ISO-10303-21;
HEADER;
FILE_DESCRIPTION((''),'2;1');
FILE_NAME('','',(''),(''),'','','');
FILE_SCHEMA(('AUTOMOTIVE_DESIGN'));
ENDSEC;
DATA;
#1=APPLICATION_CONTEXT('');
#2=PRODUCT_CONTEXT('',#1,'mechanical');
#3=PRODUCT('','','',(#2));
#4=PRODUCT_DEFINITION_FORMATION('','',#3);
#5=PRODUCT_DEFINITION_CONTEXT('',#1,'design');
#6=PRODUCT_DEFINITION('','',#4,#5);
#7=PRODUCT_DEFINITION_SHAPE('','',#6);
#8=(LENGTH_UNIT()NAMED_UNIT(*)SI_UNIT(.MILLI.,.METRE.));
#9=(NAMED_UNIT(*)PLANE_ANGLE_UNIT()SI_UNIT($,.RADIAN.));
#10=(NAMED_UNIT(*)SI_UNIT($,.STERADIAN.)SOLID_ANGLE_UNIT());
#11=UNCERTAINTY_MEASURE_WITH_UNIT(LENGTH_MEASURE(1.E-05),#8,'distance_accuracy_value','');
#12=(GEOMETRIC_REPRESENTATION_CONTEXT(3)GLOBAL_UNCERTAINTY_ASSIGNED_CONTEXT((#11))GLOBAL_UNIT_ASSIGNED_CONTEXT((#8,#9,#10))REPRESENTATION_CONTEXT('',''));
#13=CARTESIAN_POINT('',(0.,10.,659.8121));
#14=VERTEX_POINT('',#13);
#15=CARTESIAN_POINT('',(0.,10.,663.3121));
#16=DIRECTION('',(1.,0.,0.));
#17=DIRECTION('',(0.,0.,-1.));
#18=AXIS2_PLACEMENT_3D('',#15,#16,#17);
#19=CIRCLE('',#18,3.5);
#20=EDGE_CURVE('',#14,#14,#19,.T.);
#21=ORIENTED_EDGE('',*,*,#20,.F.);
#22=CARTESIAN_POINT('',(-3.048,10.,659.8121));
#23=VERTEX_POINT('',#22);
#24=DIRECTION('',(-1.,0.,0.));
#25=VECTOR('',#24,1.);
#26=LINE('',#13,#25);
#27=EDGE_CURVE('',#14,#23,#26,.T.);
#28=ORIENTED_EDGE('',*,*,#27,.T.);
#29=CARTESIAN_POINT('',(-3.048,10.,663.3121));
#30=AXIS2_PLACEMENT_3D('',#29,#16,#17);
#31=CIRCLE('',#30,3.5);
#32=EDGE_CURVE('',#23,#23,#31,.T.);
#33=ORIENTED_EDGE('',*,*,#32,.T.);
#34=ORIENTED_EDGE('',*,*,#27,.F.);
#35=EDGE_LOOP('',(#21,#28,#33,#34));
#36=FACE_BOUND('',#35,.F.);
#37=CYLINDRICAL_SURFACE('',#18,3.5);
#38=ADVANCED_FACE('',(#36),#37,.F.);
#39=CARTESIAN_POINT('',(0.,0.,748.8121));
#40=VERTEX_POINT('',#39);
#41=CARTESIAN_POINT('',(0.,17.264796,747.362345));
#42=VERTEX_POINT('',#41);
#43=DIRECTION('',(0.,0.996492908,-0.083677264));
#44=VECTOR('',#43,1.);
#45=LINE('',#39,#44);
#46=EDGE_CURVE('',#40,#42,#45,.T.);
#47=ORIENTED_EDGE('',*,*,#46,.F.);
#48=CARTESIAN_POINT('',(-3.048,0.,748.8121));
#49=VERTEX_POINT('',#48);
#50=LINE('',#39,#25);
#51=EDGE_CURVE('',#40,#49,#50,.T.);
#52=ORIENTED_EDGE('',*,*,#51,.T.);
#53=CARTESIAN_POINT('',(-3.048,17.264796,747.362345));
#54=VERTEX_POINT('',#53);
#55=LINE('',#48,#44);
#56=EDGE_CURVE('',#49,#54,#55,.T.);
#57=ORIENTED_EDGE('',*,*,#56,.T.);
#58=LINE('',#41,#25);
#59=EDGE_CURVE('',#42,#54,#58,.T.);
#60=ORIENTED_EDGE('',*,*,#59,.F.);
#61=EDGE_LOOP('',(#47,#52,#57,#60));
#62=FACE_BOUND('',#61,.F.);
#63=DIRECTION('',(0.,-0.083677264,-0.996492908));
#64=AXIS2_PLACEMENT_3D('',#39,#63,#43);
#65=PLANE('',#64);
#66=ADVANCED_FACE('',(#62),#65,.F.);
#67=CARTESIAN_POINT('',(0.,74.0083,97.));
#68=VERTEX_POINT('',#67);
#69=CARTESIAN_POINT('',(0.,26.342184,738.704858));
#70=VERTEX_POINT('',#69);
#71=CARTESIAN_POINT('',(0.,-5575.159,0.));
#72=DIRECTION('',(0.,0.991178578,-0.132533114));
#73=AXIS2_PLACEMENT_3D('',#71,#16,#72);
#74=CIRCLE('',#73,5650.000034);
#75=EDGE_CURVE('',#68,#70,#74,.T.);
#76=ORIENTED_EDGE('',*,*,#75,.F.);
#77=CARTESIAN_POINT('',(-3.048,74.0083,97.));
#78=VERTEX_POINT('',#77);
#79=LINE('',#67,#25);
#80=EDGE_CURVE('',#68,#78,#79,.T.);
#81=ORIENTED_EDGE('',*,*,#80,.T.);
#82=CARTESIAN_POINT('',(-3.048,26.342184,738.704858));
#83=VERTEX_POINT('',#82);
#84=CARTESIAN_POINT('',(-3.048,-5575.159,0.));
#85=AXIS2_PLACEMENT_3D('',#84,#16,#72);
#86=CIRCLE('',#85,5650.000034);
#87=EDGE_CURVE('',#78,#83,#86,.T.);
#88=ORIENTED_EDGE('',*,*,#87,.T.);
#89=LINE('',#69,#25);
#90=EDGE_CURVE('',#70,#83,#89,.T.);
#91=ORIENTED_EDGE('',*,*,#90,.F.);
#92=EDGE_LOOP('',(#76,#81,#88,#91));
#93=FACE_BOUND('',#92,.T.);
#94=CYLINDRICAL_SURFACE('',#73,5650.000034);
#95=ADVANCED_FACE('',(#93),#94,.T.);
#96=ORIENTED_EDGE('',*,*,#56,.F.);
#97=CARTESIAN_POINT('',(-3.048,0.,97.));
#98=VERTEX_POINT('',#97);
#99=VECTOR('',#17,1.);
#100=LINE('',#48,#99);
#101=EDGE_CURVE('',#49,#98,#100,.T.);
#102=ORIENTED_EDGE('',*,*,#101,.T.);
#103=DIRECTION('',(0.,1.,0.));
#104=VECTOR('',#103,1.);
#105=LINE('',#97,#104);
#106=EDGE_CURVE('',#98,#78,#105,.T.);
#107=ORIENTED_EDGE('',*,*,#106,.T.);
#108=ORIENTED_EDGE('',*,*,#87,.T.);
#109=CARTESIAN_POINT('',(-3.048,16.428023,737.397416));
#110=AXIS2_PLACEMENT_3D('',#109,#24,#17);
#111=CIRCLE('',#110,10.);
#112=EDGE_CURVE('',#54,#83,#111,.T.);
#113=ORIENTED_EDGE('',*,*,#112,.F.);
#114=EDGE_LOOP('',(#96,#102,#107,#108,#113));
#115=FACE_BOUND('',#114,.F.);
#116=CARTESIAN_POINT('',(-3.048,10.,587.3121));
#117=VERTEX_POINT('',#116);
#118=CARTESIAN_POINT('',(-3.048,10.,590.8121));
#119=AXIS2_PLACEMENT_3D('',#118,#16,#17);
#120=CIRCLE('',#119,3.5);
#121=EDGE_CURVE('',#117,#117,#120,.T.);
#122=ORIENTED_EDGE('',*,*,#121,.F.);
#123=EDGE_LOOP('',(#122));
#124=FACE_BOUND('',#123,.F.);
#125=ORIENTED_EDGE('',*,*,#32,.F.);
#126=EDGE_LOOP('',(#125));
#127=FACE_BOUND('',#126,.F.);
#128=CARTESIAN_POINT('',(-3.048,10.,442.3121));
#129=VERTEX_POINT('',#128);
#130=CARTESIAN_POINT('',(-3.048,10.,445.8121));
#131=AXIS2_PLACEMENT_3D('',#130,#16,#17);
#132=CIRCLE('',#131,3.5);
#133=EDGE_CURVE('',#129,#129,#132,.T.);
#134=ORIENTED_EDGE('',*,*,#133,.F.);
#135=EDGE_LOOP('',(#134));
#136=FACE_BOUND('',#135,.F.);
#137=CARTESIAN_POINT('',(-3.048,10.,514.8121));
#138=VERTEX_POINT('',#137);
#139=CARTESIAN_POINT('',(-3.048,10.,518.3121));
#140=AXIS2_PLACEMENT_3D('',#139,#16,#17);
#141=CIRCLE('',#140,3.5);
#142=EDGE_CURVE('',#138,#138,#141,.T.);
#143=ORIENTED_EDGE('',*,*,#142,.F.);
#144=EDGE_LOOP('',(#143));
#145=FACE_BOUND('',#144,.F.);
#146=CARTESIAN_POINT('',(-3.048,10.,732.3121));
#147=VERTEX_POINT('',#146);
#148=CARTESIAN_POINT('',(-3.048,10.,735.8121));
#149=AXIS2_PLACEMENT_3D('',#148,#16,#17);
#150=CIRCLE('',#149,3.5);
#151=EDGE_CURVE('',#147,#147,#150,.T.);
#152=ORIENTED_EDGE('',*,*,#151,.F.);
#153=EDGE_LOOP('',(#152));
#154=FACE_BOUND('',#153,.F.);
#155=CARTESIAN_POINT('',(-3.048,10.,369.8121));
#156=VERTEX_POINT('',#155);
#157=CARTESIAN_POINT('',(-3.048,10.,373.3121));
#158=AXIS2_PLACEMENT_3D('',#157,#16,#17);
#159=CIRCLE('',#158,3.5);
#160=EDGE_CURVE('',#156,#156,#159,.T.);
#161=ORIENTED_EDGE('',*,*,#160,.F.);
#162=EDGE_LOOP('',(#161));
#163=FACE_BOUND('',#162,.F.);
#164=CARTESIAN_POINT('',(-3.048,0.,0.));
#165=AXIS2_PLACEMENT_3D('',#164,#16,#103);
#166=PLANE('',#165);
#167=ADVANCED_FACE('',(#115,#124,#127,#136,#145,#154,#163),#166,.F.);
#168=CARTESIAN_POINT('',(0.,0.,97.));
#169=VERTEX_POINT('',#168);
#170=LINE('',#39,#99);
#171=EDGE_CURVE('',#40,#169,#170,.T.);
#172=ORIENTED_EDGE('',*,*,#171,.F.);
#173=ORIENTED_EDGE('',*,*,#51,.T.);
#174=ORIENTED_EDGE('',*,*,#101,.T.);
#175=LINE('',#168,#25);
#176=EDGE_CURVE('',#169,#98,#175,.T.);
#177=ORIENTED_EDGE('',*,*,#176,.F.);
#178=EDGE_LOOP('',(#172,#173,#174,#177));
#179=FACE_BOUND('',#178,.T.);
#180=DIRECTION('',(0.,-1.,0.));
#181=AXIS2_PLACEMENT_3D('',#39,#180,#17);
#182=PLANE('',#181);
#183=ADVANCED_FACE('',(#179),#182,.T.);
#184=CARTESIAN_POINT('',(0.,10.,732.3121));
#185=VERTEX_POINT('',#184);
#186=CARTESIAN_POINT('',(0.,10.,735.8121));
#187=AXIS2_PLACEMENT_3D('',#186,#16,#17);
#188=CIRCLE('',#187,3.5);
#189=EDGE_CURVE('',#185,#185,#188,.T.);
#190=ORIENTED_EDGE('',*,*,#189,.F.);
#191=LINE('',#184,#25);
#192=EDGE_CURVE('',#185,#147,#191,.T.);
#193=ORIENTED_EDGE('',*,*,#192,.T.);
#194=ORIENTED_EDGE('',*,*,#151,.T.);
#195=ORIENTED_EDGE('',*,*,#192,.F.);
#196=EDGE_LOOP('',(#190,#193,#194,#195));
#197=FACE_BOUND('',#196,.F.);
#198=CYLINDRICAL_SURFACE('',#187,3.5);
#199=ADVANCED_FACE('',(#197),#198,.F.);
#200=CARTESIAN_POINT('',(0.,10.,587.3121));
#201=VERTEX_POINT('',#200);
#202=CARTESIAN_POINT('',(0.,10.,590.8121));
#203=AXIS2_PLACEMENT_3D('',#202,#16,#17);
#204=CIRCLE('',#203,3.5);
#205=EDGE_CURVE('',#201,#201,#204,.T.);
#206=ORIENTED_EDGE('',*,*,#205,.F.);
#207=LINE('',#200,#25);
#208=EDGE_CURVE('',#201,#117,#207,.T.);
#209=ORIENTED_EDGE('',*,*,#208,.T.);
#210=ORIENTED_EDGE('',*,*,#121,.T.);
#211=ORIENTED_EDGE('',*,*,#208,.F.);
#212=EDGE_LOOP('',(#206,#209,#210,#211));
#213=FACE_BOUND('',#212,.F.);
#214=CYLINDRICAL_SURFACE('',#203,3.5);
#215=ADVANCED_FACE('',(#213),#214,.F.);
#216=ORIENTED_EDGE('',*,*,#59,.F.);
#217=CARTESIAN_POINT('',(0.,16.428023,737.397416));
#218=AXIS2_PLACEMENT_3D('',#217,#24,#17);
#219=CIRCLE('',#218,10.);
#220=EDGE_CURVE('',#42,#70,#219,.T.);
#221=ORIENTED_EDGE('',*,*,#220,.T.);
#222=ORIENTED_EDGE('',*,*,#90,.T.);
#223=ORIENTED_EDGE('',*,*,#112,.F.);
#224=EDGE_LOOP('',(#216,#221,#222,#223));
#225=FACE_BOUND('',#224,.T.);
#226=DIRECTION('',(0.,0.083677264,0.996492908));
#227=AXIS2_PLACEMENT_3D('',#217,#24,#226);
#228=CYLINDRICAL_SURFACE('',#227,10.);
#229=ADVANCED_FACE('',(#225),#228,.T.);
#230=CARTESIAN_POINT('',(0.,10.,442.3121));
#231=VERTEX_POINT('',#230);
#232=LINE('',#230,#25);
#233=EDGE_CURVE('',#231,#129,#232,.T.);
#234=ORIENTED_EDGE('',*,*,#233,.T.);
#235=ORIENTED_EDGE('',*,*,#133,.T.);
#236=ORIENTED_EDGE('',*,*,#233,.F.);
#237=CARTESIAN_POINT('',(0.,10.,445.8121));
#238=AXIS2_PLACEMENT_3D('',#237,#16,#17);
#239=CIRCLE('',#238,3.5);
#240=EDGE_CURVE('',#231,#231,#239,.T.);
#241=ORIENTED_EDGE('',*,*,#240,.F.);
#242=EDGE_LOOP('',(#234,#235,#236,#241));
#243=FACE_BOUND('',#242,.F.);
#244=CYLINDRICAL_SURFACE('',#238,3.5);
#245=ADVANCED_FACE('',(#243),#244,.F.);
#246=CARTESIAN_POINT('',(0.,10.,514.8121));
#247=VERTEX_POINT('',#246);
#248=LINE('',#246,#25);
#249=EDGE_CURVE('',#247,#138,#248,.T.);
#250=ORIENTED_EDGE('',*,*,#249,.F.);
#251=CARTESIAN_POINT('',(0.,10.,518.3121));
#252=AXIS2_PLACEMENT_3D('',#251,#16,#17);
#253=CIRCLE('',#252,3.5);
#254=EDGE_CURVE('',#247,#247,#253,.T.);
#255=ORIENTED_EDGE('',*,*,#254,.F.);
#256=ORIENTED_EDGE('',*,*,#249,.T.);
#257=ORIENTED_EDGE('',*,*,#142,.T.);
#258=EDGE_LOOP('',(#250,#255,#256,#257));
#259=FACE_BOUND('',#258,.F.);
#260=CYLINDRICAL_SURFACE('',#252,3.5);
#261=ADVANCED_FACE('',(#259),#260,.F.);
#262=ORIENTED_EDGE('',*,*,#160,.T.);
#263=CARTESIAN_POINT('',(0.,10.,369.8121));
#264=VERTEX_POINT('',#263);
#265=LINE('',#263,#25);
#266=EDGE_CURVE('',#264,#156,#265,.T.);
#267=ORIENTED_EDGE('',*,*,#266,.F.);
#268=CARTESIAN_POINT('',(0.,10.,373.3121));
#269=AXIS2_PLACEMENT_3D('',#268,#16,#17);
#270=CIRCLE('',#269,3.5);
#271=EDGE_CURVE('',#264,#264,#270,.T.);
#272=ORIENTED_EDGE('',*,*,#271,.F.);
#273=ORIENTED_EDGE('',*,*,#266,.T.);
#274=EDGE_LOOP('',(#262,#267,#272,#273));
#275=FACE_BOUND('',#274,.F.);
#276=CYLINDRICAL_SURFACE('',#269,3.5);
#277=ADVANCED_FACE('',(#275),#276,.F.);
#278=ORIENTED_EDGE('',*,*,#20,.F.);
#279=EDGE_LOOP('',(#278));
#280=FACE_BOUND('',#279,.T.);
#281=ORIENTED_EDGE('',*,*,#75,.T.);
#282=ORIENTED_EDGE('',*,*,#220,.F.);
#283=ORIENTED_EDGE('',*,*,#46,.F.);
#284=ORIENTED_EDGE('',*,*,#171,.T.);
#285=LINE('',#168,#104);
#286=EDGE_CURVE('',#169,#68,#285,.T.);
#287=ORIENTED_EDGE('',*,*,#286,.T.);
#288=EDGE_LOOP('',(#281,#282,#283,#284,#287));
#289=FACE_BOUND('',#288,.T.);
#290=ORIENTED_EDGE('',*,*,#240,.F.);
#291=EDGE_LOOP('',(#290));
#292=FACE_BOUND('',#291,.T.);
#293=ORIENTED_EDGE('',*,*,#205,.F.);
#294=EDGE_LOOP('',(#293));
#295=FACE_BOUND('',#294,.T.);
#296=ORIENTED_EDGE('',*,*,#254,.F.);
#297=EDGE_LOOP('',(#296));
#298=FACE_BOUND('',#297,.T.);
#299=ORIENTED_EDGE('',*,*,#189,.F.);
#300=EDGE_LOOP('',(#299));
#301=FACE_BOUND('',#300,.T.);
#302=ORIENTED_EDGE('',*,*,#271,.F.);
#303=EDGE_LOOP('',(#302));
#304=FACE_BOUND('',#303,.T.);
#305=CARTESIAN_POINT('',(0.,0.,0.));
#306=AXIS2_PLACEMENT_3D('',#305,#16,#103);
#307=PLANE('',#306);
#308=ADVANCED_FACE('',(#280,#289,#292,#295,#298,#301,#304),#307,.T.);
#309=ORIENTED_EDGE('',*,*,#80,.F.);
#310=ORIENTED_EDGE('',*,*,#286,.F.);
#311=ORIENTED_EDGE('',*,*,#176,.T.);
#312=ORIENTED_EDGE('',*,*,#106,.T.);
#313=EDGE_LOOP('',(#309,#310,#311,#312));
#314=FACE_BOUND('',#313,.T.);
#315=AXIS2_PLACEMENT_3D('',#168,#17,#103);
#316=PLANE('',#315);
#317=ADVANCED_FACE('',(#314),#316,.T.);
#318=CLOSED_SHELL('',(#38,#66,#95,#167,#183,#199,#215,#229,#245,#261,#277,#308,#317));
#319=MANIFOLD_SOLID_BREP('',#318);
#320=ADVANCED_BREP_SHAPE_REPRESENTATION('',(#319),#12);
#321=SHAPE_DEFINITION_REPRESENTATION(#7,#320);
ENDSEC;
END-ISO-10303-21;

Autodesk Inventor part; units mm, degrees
ref_plane "YZ Plane" through (0, 0, 0) normal (1, 0, 0) x (0, 1, 0)
ref_plane "XZ Plane" through (0, 0, 0) normal (0, 1, 0) x (-1, 0, 0)
ref_plane "XY Plane" through (0, 0, 0) normal (0, 0, 1) x (1, 0, 0)
sketch "Sketch1" plane through (0, 0, 0) normal (1, 0, 0) x (0, 1, 0)
  line L0 (25, 748.8121) -> (0, 748.8121)
  line L1 (0, 748.8121) -> (0, -748.8121)
  line L2 (0, -748.8121) -> (25, -748.8121)
  arc A0 (25, -748.8121) -> (25, 748.8121) centre (-5575.159, 0) ccw
  line L3 (0, 748.8121) -> (25.2835, 746.689)
  line L4 (0, -748.8121) -> (25.2835, -746.689)
  line L5 (0, 97) -> (74.0083, 97)
  point P0 (0, 0)
  point P1 (0, 0)
  dimension "d2" = 25
  dimension "d3" = 5650
  dimension "d7" = 85.2
  dimension "d8" = 85.2
  dimension "d33" = 97
  dimension "d34" = 651.812
extrude "Plate1" add sketch "Sketch1" against normal blind 3.048 contours L3 A0 L5 L1
fillet "Corner Round3" radius 10 1 edges at (-1.524, 25.2835, 746.689)
sketch "Sketch4" plane through (0, 0, 0) normal (1, 0, 0) x (0, 0, -1)
  circle A0 centre (-735.8121, 10) radius 3.5
  line L0 (-748.8121, 0) -> (-97, 0) projected
  point P0 (0, 0)
  dimension "d23" = 7
  dimension "d25" = 10
  dimension "d32" = 13
extrude "Extrusion1" cut sketch "Sketch4" against normal through all
pattern_linear "Rectangular Pattern2" count 6 spacing 72.5 along (0, 0, -1) of "Extrusion1"
equation "\"BendReliefWidth\" = Thickness"
equation "\"BendReliefDepth\" = 0.5 * Thickness"
equation "\"CornerReliefSize\" = 4 * Thickness"
equation "\"MinimumRemnant\" = 2 * Thickness"
equation "\"TransitionRadius\" = BendRadius"
equation "\"JacobiRadiusSize\" = BendRadius"
equation "\"GapSize\" = Thickness"
equation "\"BendRadius\" = Thickness"
properties part number "MSC 083 top support gills" material "Stainless Steel"
